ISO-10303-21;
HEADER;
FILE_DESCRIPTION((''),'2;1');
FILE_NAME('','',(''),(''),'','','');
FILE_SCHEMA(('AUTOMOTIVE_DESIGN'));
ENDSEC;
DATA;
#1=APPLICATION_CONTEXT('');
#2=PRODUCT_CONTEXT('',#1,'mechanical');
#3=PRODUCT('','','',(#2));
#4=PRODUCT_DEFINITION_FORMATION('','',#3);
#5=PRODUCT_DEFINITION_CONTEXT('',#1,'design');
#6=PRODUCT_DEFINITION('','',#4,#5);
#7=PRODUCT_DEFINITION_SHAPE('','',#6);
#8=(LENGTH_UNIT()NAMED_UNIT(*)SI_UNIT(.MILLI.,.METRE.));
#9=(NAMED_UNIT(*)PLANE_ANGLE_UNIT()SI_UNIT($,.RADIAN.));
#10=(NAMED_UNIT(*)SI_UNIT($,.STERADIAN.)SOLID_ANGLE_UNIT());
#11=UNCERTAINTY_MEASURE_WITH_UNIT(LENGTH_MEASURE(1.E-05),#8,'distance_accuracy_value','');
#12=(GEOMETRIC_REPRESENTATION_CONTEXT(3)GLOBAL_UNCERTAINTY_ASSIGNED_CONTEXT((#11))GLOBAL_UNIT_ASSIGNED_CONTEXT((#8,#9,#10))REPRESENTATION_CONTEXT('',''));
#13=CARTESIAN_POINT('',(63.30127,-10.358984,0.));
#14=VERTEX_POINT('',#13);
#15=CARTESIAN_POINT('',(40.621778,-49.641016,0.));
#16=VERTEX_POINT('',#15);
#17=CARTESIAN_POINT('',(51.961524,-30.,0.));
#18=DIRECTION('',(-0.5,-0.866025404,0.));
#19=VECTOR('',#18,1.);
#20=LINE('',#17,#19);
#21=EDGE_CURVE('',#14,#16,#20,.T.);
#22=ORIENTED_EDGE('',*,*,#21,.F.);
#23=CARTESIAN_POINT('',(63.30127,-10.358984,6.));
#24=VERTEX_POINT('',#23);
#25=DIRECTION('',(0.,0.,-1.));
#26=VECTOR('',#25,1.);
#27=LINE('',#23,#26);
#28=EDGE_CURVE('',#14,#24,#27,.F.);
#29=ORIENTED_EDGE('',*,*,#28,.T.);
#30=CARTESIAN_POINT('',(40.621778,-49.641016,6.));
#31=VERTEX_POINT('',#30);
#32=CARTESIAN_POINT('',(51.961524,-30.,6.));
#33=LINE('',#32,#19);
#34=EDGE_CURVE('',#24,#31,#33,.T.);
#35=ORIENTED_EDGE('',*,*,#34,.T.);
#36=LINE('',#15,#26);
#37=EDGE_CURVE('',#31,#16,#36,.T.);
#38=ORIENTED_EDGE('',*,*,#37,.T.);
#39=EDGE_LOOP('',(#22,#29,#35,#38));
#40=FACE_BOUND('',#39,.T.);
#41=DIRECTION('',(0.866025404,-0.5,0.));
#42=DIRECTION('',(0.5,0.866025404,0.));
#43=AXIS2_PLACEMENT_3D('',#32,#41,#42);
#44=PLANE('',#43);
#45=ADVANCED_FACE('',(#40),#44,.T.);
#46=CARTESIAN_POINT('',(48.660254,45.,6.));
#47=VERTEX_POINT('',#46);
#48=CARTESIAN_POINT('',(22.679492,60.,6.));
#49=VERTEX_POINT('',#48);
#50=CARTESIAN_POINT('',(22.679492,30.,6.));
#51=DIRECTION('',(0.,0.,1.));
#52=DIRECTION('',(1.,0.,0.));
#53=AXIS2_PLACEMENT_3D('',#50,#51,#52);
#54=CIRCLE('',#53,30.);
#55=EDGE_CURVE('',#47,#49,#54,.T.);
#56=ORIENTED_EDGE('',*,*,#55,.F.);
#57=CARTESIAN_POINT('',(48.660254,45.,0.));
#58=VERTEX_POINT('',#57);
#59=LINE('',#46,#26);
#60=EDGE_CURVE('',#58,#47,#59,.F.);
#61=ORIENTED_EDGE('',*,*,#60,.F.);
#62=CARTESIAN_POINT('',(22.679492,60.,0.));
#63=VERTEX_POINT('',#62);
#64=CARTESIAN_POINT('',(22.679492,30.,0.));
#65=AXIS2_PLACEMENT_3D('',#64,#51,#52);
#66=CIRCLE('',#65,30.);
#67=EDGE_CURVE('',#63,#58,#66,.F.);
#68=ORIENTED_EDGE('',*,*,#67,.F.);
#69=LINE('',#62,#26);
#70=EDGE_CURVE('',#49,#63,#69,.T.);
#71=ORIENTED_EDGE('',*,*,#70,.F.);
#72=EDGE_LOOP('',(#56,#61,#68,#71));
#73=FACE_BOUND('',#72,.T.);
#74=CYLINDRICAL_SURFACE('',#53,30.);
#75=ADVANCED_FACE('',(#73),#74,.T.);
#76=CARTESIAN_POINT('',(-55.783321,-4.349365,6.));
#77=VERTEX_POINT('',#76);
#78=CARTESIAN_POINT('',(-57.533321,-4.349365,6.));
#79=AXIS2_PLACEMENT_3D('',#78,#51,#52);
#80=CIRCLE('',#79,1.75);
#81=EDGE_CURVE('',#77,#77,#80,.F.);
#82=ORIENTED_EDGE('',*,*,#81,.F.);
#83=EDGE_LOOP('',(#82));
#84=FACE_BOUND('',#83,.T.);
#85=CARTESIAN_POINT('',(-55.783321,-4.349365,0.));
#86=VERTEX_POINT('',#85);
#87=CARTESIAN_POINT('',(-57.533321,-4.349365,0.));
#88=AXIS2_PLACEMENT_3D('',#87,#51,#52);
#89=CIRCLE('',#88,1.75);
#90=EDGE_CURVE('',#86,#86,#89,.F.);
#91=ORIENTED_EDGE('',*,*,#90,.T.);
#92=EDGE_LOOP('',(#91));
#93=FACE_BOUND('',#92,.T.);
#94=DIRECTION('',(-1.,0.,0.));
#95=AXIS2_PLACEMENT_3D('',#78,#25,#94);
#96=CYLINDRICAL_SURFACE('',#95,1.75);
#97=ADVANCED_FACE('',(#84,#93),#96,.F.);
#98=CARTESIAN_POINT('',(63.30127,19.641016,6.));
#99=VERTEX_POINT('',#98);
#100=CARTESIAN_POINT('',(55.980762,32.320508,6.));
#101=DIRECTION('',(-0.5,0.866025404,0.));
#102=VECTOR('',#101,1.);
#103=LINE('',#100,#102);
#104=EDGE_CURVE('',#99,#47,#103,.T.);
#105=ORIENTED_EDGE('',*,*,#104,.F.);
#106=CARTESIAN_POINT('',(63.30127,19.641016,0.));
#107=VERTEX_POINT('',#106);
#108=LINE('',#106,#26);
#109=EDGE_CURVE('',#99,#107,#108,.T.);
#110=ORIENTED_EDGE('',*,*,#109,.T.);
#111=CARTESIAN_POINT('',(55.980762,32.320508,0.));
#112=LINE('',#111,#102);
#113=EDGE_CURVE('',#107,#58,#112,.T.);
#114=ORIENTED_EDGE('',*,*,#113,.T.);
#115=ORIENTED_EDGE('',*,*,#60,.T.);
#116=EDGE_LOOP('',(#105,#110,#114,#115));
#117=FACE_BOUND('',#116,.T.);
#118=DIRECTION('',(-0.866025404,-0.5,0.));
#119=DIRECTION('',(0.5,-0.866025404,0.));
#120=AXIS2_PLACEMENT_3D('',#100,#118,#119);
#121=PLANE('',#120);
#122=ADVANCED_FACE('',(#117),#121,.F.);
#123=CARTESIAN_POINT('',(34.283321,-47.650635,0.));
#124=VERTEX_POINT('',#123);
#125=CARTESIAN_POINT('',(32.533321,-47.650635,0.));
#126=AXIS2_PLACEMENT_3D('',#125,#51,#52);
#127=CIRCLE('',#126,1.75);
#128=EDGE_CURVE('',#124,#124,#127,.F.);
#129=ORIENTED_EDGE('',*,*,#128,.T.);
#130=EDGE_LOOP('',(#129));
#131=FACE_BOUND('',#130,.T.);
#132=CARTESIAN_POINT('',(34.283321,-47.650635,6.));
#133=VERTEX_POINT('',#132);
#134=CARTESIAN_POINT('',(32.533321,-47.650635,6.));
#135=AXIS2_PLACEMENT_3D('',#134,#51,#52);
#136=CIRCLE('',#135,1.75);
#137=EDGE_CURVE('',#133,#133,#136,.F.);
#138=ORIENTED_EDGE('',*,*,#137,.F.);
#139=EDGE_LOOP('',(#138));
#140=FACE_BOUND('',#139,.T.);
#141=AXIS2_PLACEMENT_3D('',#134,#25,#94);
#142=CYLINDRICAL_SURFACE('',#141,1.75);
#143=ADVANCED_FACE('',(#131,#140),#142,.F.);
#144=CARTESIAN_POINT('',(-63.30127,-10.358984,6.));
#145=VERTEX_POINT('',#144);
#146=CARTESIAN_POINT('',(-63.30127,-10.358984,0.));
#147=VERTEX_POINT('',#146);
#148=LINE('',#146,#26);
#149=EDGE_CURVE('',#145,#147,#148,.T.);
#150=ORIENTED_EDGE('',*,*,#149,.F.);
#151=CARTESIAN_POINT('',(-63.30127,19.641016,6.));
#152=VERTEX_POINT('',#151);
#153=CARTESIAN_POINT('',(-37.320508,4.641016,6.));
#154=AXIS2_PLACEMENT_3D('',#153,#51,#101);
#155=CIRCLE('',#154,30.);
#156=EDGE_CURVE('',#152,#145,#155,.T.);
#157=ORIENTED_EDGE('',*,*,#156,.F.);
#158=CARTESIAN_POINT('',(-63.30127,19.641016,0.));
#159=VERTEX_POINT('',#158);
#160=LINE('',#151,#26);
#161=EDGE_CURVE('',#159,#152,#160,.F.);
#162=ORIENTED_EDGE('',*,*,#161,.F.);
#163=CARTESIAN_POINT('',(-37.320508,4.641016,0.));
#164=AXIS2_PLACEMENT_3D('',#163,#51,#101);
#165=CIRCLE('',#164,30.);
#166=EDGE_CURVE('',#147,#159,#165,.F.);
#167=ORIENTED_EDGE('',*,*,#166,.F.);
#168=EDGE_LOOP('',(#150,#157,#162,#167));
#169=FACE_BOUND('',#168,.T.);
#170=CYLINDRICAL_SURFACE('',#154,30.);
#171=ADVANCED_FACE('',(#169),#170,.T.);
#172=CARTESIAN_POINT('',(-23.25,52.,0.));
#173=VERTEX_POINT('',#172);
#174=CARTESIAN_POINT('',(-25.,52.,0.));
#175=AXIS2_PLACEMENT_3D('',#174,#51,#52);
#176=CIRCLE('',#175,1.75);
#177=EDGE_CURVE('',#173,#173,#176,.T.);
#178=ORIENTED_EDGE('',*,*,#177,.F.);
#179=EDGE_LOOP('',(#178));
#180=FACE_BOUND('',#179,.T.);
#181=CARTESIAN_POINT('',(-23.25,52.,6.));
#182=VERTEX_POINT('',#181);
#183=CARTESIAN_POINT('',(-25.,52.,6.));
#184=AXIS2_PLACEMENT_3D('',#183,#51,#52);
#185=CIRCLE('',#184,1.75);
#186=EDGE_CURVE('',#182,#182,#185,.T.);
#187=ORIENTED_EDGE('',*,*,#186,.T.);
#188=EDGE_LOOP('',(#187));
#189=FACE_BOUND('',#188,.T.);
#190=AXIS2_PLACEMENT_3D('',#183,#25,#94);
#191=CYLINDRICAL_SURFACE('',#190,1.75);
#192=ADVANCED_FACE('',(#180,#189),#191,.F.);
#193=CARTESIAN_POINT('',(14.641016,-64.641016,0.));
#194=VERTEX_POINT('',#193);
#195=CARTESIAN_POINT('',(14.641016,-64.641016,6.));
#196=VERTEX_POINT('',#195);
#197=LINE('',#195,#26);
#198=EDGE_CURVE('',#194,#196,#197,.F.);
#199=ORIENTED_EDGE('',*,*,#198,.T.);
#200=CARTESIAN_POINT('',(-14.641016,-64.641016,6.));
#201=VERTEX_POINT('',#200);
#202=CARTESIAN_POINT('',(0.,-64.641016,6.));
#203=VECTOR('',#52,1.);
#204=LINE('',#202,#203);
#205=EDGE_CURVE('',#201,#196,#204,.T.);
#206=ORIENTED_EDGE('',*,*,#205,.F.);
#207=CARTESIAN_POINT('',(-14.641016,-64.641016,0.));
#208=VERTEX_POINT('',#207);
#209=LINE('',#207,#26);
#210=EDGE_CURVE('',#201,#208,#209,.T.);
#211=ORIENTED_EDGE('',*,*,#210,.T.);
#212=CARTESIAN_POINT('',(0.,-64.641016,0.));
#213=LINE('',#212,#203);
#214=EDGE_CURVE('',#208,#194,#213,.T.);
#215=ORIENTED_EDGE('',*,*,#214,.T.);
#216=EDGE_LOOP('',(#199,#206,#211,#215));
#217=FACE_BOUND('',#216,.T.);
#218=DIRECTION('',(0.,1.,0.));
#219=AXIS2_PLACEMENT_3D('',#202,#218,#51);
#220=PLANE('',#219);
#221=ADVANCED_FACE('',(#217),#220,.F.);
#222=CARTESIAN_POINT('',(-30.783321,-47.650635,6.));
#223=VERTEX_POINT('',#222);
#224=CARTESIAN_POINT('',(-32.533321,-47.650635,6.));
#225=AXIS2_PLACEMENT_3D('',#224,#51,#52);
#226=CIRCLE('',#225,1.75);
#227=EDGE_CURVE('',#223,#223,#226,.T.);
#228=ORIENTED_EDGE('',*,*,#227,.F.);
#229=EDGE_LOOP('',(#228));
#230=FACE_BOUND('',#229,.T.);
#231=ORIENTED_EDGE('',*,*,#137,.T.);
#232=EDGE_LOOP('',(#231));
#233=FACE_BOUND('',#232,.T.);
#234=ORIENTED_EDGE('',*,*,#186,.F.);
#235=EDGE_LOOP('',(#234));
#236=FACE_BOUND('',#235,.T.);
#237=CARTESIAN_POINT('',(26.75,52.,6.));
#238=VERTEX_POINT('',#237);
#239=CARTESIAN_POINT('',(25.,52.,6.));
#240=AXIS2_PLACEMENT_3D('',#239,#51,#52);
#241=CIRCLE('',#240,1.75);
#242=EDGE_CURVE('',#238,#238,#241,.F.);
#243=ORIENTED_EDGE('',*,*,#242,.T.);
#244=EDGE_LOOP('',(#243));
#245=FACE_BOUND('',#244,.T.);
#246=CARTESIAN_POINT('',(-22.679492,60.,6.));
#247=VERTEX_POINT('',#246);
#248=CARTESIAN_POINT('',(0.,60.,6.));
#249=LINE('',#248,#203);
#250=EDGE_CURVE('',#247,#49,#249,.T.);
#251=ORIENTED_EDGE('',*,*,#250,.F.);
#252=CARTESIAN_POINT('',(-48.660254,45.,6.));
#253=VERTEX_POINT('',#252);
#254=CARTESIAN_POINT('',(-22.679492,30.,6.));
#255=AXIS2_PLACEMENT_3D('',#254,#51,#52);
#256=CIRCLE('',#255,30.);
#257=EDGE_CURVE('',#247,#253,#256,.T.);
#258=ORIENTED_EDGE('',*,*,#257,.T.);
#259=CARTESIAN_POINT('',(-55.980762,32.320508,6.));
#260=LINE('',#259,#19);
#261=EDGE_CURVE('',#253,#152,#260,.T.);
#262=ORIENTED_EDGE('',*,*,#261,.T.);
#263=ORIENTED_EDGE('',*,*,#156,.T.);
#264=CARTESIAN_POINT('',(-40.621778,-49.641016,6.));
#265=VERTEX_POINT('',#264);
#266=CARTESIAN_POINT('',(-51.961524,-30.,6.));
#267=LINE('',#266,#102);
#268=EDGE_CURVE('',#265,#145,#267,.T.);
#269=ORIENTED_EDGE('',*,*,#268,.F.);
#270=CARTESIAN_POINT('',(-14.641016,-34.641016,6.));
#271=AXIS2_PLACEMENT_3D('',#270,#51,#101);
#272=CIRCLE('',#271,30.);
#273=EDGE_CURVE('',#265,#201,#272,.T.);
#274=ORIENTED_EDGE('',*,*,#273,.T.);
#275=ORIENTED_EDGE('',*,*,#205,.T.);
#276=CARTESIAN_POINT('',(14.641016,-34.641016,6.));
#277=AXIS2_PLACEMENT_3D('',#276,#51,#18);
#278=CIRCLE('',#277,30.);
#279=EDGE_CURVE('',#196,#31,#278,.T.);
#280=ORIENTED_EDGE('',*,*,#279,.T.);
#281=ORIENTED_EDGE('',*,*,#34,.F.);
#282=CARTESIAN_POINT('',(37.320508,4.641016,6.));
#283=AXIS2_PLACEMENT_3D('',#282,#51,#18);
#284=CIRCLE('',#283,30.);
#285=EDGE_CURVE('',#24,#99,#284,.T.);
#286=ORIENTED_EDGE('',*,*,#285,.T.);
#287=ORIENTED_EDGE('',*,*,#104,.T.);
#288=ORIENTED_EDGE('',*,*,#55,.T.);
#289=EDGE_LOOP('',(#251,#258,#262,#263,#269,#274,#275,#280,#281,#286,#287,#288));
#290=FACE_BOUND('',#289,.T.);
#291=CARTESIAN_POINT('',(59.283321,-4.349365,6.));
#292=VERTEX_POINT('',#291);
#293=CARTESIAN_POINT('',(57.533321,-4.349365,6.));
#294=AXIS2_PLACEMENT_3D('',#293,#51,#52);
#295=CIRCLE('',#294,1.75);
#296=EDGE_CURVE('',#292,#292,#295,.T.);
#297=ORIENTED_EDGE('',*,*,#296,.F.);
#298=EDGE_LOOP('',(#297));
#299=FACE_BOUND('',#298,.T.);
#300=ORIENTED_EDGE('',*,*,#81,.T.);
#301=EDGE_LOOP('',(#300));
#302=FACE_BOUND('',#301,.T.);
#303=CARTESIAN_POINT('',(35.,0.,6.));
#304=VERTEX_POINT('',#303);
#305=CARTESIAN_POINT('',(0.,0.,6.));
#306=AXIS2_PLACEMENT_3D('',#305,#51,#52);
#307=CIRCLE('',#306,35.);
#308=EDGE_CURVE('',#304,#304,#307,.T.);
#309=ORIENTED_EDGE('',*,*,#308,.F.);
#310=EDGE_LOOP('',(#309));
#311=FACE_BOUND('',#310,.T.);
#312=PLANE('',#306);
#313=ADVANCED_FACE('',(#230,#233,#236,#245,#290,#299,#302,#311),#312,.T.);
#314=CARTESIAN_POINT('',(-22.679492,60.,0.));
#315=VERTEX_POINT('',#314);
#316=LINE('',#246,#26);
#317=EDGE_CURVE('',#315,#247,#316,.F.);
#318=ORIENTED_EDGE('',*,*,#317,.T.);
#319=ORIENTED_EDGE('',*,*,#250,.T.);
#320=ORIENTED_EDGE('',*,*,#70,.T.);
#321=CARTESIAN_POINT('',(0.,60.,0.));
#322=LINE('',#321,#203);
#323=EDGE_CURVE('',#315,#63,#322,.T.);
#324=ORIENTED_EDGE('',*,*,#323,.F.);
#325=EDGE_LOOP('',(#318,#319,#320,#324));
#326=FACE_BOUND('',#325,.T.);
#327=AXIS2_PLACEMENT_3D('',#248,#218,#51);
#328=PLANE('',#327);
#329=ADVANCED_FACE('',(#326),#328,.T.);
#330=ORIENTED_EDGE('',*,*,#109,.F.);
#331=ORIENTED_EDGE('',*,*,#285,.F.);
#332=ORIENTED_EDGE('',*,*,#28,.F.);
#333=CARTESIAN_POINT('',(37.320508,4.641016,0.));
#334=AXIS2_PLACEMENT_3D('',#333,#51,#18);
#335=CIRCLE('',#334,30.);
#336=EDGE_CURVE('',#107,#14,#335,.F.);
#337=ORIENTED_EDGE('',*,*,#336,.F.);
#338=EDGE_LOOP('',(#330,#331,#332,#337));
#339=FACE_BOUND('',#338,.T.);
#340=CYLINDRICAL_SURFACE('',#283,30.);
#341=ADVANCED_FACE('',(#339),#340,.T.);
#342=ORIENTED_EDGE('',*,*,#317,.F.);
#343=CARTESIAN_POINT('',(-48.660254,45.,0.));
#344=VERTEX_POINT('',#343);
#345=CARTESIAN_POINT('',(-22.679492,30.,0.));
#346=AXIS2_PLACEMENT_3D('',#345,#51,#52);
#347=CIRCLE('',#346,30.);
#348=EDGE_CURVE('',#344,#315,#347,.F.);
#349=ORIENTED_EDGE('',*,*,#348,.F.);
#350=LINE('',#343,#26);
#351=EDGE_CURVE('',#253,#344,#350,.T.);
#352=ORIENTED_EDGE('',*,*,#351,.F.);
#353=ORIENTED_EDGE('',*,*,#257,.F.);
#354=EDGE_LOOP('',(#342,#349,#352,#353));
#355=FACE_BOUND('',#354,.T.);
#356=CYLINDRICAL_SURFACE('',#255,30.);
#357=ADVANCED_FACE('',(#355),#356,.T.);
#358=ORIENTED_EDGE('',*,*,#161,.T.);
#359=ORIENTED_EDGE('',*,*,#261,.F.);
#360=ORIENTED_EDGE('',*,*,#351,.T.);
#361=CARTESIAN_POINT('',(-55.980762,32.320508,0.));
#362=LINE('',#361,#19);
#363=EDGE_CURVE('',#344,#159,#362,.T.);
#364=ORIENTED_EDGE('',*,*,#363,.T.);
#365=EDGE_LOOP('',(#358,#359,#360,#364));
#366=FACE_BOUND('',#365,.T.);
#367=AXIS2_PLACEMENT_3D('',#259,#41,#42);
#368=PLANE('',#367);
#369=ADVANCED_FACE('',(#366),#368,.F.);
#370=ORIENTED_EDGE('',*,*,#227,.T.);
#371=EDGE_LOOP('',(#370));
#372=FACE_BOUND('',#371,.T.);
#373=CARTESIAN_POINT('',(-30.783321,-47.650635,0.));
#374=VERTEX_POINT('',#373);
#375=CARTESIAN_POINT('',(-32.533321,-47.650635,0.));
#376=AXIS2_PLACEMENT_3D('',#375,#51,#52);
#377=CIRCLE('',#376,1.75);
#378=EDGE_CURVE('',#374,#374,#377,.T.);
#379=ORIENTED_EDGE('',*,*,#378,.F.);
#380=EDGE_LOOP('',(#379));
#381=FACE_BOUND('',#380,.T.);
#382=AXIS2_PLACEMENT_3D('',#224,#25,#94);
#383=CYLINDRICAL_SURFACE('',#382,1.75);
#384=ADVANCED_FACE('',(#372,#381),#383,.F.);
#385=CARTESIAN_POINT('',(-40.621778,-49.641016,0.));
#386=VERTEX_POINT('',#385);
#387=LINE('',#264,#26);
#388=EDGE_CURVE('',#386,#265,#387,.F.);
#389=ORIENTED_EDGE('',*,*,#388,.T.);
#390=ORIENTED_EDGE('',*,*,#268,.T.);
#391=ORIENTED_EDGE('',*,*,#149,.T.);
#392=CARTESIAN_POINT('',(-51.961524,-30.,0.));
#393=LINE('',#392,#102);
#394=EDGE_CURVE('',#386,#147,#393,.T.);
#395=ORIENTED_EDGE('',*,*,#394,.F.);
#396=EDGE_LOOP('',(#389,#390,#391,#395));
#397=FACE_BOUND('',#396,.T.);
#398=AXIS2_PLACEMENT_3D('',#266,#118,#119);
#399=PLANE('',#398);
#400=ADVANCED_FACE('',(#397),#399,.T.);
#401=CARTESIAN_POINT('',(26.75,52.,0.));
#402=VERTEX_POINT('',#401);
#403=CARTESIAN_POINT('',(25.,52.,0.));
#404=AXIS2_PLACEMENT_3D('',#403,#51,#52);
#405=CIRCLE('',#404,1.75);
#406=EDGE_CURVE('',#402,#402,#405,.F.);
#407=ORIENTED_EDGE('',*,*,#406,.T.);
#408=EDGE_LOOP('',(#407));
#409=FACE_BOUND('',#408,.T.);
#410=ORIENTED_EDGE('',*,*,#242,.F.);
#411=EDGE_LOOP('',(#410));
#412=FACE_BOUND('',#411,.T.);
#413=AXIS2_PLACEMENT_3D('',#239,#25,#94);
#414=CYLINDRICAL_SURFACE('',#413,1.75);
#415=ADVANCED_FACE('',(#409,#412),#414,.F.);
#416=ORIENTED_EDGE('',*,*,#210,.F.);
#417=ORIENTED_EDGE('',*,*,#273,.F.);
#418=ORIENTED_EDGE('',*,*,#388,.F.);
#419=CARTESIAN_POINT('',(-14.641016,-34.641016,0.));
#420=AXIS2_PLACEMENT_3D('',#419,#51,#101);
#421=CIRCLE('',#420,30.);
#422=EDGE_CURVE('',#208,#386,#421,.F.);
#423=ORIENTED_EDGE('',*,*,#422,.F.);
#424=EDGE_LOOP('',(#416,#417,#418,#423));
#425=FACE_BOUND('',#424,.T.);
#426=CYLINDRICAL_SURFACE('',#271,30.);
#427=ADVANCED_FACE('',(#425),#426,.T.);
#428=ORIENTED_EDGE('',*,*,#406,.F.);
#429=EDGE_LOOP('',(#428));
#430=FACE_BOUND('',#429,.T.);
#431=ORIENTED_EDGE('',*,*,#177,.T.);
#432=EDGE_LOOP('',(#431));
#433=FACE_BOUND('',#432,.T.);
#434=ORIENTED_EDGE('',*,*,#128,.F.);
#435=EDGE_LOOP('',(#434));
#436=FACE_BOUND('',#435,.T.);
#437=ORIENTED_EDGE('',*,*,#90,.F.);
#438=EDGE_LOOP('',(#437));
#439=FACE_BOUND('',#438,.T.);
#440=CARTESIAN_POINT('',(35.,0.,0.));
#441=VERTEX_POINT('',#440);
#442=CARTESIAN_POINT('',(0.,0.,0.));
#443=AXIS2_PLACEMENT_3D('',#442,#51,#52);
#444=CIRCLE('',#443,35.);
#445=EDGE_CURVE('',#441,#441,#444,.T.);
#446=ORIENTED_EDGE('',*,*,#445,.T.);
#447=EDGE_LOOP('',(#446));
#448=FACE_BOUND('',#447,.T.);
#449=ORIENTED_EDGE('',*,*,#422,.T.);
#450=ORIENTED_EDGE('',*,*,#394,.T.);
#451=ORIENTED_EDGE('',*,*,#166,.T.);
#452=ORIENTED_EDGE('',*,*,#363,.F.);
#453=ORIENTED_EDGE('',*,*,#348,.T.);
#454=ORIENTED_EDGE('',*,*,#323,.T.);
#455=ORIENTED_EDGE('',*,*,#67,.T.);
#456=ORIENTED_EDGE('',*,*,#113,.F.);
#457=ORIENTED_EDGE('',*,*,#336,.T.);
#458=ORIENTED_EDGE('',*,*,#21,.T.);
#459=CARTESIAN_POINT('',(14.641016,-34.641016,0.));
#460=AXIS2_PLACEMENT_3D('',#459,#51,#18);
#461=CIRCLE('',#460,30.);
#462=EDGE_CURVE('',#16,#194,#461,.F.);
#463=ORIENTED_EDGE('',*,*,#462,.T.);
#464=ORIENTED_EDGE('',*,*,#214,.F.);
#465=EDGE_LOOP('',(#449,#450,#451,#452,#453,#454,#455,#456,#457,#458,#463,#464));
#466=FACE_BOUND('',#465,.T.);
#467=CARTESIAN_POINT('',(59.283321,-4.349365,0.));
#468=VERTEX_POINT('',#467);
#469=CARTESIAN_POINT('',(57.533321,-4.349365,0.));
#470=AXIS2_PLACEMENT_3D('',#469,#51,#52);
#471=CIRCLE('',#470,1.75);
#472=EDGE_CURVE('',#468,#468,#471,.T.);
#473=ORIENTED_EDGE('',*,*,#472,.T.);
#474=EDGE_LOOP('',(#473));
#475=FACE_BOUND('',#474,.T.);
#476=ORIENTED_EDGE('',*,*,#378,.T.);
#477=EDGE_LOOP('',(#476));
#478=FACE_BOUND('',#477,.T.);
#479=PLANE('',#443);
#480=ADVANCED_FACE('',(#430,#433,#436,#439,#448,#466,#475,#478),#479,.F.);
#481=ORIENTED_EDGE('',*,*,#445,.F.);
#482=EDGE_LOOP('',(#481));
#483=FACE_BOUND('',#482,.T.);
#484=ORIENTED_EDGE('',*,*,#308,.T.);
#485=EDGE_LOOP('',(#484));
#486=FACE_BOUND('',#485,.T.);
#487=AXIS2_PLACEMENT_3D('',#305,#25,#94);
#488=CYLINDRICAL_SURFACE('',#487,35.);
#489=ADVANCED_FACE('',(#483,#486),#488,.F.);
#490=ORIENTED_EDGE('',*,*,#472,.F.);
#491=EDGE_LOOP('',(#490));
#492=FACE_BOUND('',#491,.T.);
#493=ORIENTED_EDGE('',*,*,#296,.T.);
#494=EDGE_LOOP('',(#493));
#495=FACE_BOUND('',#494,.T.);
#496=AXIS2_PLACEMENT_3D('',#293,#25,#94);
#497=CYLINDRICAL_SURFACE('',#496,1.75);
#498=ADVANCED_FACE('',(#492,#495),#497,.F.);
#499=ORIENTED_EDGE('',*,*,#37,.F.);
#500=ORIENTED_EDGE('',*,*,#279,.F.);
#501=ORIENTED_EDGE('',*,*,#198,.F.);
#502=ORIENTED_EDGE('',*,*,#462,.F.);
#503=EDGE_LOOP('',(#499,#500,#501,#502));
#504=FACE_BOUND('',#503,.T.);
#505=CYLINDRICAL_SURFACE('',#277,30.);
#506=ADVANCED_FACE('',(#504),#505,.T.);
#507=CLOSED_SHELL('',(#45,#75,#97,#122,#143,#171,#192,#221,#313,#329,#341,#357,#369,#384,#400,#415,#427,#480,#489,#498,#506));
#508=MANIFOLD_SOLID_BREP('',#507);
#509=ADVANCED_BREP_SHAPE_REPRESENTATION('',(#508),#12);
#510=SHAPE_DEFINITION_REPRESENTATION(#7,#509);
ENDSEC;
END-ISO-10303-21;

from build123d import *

# Parameters (mm, degrees)
SKETCH5_R           = 35
SKETCH5_R_2         = 1.75
BOSS_EXTRUDE2_DEPTH = 6
FILLET1_R           = 30
CIRPATTERN3_DEPTH   = 6


# Read off the part's stored shape, not the designer's step: CirPattern3
with BuildPart() as part:
    # Sketch5 → Boss-Extrude2 (new body)
    with BuildSketch(Plane.XY):
        Polygon((-40, 60), (40, 60), (71.961524227, 4.641016151), (31.961524227, -64.641016151), (-31.961524227, -64.641016151), (-71.961524227, 4.641016151), align=None)
        Circle(SKETCH5_R, mode=Mode.SUBTRACT)
        with Locations((-25, 52)):
            Circle(SKETCH5_R_2, mode=Mode.SUBTRACT)
        with Locations((25, 52)):
            Circle(SKETCH5_R_2, mode=Mode.SUBTRACT)
        with Locations((57.533320997, -4.349364905)):
            Circle(SKETCH5_R_2, mode=Mode.SUBTRACT)
        with Locations((32.533320997, -47.650635095)):
            Circle(SKETCH5_R_2, mode=Mode.SUBTRACT)
        with Locations((-32.533320997, -47.650635095)):
            Circle(SKETCH5_R_2, mode=Mode.SUBTRACT)
        with Locations((-57.533320997, -4.349364905)):
            Circle(SKETCH5_R_2, mode=Mode.SUBTRACT)
    extrude(amount=BOSS_EXTRUDE2_DEPTH)

    # Fillet1
    fillet1_edges = [part.edges().sort_by_distance(p)[0] for p in [
        (-40, 60, 3),
        (40, 60, 3),
    ]]
    fillet(fillet1_edges, radius=FILLET1_R)

    # CirPattern3 outline → CirPattern3 (cut)
    with BuildSketch(Plane.XY):
        with BuildLine():
            Line((-71.961524227, 4.641016151), (-63.301270189, -10.358983849))
            ThreePointArc((-63.301270189, -10.358983849), (-67.320508076, 4.641016151), (-63.301270189, 19.641016151))
            Line((-63.301270189, 19.641016151), (-71.961524227, 4.641016151))
        make_face()
        with BuildLine():
            Line((-31.961524227, -64.641016151), (-14.641016151, -64.641016151))
            ThreePointArc((-14.641016151, -64.641016151), (-29.641016151, -60.621778265), (-40.621778265, -49.641016151))
            Line((-40.621778265, -49.641016151), (-31.961524227, -64.641016151))
        make_face()
        with BuildLine():
            Line((31.961524227, -64.641016151), (40.621778265, -49.641016151))
            ThreePointArc((40.621778265, -49.641016151), (29.641016151, -60.621778265), (14.641016151, -64.641016151))
            Line((14.641016151, -64.641016151), (31.961524227, -64.641016151))
        make_face()
        with BuildLine():
            ThreePointArc((63.301270189, 19.641016151), (67.320508076, 4.641016151), (63.301270189, -10.358983849))
            Line((63.301270189, -10.358983849), (71.961524227, 4.641016151))
            Line((71.961524227, 4.641016151), (63.301270189, 19.641016151))
        make_face()
    extrude(amount=CIRPATTERN3_DEPTH, mode=Mode.SUBTRACT)


solid = part.part
